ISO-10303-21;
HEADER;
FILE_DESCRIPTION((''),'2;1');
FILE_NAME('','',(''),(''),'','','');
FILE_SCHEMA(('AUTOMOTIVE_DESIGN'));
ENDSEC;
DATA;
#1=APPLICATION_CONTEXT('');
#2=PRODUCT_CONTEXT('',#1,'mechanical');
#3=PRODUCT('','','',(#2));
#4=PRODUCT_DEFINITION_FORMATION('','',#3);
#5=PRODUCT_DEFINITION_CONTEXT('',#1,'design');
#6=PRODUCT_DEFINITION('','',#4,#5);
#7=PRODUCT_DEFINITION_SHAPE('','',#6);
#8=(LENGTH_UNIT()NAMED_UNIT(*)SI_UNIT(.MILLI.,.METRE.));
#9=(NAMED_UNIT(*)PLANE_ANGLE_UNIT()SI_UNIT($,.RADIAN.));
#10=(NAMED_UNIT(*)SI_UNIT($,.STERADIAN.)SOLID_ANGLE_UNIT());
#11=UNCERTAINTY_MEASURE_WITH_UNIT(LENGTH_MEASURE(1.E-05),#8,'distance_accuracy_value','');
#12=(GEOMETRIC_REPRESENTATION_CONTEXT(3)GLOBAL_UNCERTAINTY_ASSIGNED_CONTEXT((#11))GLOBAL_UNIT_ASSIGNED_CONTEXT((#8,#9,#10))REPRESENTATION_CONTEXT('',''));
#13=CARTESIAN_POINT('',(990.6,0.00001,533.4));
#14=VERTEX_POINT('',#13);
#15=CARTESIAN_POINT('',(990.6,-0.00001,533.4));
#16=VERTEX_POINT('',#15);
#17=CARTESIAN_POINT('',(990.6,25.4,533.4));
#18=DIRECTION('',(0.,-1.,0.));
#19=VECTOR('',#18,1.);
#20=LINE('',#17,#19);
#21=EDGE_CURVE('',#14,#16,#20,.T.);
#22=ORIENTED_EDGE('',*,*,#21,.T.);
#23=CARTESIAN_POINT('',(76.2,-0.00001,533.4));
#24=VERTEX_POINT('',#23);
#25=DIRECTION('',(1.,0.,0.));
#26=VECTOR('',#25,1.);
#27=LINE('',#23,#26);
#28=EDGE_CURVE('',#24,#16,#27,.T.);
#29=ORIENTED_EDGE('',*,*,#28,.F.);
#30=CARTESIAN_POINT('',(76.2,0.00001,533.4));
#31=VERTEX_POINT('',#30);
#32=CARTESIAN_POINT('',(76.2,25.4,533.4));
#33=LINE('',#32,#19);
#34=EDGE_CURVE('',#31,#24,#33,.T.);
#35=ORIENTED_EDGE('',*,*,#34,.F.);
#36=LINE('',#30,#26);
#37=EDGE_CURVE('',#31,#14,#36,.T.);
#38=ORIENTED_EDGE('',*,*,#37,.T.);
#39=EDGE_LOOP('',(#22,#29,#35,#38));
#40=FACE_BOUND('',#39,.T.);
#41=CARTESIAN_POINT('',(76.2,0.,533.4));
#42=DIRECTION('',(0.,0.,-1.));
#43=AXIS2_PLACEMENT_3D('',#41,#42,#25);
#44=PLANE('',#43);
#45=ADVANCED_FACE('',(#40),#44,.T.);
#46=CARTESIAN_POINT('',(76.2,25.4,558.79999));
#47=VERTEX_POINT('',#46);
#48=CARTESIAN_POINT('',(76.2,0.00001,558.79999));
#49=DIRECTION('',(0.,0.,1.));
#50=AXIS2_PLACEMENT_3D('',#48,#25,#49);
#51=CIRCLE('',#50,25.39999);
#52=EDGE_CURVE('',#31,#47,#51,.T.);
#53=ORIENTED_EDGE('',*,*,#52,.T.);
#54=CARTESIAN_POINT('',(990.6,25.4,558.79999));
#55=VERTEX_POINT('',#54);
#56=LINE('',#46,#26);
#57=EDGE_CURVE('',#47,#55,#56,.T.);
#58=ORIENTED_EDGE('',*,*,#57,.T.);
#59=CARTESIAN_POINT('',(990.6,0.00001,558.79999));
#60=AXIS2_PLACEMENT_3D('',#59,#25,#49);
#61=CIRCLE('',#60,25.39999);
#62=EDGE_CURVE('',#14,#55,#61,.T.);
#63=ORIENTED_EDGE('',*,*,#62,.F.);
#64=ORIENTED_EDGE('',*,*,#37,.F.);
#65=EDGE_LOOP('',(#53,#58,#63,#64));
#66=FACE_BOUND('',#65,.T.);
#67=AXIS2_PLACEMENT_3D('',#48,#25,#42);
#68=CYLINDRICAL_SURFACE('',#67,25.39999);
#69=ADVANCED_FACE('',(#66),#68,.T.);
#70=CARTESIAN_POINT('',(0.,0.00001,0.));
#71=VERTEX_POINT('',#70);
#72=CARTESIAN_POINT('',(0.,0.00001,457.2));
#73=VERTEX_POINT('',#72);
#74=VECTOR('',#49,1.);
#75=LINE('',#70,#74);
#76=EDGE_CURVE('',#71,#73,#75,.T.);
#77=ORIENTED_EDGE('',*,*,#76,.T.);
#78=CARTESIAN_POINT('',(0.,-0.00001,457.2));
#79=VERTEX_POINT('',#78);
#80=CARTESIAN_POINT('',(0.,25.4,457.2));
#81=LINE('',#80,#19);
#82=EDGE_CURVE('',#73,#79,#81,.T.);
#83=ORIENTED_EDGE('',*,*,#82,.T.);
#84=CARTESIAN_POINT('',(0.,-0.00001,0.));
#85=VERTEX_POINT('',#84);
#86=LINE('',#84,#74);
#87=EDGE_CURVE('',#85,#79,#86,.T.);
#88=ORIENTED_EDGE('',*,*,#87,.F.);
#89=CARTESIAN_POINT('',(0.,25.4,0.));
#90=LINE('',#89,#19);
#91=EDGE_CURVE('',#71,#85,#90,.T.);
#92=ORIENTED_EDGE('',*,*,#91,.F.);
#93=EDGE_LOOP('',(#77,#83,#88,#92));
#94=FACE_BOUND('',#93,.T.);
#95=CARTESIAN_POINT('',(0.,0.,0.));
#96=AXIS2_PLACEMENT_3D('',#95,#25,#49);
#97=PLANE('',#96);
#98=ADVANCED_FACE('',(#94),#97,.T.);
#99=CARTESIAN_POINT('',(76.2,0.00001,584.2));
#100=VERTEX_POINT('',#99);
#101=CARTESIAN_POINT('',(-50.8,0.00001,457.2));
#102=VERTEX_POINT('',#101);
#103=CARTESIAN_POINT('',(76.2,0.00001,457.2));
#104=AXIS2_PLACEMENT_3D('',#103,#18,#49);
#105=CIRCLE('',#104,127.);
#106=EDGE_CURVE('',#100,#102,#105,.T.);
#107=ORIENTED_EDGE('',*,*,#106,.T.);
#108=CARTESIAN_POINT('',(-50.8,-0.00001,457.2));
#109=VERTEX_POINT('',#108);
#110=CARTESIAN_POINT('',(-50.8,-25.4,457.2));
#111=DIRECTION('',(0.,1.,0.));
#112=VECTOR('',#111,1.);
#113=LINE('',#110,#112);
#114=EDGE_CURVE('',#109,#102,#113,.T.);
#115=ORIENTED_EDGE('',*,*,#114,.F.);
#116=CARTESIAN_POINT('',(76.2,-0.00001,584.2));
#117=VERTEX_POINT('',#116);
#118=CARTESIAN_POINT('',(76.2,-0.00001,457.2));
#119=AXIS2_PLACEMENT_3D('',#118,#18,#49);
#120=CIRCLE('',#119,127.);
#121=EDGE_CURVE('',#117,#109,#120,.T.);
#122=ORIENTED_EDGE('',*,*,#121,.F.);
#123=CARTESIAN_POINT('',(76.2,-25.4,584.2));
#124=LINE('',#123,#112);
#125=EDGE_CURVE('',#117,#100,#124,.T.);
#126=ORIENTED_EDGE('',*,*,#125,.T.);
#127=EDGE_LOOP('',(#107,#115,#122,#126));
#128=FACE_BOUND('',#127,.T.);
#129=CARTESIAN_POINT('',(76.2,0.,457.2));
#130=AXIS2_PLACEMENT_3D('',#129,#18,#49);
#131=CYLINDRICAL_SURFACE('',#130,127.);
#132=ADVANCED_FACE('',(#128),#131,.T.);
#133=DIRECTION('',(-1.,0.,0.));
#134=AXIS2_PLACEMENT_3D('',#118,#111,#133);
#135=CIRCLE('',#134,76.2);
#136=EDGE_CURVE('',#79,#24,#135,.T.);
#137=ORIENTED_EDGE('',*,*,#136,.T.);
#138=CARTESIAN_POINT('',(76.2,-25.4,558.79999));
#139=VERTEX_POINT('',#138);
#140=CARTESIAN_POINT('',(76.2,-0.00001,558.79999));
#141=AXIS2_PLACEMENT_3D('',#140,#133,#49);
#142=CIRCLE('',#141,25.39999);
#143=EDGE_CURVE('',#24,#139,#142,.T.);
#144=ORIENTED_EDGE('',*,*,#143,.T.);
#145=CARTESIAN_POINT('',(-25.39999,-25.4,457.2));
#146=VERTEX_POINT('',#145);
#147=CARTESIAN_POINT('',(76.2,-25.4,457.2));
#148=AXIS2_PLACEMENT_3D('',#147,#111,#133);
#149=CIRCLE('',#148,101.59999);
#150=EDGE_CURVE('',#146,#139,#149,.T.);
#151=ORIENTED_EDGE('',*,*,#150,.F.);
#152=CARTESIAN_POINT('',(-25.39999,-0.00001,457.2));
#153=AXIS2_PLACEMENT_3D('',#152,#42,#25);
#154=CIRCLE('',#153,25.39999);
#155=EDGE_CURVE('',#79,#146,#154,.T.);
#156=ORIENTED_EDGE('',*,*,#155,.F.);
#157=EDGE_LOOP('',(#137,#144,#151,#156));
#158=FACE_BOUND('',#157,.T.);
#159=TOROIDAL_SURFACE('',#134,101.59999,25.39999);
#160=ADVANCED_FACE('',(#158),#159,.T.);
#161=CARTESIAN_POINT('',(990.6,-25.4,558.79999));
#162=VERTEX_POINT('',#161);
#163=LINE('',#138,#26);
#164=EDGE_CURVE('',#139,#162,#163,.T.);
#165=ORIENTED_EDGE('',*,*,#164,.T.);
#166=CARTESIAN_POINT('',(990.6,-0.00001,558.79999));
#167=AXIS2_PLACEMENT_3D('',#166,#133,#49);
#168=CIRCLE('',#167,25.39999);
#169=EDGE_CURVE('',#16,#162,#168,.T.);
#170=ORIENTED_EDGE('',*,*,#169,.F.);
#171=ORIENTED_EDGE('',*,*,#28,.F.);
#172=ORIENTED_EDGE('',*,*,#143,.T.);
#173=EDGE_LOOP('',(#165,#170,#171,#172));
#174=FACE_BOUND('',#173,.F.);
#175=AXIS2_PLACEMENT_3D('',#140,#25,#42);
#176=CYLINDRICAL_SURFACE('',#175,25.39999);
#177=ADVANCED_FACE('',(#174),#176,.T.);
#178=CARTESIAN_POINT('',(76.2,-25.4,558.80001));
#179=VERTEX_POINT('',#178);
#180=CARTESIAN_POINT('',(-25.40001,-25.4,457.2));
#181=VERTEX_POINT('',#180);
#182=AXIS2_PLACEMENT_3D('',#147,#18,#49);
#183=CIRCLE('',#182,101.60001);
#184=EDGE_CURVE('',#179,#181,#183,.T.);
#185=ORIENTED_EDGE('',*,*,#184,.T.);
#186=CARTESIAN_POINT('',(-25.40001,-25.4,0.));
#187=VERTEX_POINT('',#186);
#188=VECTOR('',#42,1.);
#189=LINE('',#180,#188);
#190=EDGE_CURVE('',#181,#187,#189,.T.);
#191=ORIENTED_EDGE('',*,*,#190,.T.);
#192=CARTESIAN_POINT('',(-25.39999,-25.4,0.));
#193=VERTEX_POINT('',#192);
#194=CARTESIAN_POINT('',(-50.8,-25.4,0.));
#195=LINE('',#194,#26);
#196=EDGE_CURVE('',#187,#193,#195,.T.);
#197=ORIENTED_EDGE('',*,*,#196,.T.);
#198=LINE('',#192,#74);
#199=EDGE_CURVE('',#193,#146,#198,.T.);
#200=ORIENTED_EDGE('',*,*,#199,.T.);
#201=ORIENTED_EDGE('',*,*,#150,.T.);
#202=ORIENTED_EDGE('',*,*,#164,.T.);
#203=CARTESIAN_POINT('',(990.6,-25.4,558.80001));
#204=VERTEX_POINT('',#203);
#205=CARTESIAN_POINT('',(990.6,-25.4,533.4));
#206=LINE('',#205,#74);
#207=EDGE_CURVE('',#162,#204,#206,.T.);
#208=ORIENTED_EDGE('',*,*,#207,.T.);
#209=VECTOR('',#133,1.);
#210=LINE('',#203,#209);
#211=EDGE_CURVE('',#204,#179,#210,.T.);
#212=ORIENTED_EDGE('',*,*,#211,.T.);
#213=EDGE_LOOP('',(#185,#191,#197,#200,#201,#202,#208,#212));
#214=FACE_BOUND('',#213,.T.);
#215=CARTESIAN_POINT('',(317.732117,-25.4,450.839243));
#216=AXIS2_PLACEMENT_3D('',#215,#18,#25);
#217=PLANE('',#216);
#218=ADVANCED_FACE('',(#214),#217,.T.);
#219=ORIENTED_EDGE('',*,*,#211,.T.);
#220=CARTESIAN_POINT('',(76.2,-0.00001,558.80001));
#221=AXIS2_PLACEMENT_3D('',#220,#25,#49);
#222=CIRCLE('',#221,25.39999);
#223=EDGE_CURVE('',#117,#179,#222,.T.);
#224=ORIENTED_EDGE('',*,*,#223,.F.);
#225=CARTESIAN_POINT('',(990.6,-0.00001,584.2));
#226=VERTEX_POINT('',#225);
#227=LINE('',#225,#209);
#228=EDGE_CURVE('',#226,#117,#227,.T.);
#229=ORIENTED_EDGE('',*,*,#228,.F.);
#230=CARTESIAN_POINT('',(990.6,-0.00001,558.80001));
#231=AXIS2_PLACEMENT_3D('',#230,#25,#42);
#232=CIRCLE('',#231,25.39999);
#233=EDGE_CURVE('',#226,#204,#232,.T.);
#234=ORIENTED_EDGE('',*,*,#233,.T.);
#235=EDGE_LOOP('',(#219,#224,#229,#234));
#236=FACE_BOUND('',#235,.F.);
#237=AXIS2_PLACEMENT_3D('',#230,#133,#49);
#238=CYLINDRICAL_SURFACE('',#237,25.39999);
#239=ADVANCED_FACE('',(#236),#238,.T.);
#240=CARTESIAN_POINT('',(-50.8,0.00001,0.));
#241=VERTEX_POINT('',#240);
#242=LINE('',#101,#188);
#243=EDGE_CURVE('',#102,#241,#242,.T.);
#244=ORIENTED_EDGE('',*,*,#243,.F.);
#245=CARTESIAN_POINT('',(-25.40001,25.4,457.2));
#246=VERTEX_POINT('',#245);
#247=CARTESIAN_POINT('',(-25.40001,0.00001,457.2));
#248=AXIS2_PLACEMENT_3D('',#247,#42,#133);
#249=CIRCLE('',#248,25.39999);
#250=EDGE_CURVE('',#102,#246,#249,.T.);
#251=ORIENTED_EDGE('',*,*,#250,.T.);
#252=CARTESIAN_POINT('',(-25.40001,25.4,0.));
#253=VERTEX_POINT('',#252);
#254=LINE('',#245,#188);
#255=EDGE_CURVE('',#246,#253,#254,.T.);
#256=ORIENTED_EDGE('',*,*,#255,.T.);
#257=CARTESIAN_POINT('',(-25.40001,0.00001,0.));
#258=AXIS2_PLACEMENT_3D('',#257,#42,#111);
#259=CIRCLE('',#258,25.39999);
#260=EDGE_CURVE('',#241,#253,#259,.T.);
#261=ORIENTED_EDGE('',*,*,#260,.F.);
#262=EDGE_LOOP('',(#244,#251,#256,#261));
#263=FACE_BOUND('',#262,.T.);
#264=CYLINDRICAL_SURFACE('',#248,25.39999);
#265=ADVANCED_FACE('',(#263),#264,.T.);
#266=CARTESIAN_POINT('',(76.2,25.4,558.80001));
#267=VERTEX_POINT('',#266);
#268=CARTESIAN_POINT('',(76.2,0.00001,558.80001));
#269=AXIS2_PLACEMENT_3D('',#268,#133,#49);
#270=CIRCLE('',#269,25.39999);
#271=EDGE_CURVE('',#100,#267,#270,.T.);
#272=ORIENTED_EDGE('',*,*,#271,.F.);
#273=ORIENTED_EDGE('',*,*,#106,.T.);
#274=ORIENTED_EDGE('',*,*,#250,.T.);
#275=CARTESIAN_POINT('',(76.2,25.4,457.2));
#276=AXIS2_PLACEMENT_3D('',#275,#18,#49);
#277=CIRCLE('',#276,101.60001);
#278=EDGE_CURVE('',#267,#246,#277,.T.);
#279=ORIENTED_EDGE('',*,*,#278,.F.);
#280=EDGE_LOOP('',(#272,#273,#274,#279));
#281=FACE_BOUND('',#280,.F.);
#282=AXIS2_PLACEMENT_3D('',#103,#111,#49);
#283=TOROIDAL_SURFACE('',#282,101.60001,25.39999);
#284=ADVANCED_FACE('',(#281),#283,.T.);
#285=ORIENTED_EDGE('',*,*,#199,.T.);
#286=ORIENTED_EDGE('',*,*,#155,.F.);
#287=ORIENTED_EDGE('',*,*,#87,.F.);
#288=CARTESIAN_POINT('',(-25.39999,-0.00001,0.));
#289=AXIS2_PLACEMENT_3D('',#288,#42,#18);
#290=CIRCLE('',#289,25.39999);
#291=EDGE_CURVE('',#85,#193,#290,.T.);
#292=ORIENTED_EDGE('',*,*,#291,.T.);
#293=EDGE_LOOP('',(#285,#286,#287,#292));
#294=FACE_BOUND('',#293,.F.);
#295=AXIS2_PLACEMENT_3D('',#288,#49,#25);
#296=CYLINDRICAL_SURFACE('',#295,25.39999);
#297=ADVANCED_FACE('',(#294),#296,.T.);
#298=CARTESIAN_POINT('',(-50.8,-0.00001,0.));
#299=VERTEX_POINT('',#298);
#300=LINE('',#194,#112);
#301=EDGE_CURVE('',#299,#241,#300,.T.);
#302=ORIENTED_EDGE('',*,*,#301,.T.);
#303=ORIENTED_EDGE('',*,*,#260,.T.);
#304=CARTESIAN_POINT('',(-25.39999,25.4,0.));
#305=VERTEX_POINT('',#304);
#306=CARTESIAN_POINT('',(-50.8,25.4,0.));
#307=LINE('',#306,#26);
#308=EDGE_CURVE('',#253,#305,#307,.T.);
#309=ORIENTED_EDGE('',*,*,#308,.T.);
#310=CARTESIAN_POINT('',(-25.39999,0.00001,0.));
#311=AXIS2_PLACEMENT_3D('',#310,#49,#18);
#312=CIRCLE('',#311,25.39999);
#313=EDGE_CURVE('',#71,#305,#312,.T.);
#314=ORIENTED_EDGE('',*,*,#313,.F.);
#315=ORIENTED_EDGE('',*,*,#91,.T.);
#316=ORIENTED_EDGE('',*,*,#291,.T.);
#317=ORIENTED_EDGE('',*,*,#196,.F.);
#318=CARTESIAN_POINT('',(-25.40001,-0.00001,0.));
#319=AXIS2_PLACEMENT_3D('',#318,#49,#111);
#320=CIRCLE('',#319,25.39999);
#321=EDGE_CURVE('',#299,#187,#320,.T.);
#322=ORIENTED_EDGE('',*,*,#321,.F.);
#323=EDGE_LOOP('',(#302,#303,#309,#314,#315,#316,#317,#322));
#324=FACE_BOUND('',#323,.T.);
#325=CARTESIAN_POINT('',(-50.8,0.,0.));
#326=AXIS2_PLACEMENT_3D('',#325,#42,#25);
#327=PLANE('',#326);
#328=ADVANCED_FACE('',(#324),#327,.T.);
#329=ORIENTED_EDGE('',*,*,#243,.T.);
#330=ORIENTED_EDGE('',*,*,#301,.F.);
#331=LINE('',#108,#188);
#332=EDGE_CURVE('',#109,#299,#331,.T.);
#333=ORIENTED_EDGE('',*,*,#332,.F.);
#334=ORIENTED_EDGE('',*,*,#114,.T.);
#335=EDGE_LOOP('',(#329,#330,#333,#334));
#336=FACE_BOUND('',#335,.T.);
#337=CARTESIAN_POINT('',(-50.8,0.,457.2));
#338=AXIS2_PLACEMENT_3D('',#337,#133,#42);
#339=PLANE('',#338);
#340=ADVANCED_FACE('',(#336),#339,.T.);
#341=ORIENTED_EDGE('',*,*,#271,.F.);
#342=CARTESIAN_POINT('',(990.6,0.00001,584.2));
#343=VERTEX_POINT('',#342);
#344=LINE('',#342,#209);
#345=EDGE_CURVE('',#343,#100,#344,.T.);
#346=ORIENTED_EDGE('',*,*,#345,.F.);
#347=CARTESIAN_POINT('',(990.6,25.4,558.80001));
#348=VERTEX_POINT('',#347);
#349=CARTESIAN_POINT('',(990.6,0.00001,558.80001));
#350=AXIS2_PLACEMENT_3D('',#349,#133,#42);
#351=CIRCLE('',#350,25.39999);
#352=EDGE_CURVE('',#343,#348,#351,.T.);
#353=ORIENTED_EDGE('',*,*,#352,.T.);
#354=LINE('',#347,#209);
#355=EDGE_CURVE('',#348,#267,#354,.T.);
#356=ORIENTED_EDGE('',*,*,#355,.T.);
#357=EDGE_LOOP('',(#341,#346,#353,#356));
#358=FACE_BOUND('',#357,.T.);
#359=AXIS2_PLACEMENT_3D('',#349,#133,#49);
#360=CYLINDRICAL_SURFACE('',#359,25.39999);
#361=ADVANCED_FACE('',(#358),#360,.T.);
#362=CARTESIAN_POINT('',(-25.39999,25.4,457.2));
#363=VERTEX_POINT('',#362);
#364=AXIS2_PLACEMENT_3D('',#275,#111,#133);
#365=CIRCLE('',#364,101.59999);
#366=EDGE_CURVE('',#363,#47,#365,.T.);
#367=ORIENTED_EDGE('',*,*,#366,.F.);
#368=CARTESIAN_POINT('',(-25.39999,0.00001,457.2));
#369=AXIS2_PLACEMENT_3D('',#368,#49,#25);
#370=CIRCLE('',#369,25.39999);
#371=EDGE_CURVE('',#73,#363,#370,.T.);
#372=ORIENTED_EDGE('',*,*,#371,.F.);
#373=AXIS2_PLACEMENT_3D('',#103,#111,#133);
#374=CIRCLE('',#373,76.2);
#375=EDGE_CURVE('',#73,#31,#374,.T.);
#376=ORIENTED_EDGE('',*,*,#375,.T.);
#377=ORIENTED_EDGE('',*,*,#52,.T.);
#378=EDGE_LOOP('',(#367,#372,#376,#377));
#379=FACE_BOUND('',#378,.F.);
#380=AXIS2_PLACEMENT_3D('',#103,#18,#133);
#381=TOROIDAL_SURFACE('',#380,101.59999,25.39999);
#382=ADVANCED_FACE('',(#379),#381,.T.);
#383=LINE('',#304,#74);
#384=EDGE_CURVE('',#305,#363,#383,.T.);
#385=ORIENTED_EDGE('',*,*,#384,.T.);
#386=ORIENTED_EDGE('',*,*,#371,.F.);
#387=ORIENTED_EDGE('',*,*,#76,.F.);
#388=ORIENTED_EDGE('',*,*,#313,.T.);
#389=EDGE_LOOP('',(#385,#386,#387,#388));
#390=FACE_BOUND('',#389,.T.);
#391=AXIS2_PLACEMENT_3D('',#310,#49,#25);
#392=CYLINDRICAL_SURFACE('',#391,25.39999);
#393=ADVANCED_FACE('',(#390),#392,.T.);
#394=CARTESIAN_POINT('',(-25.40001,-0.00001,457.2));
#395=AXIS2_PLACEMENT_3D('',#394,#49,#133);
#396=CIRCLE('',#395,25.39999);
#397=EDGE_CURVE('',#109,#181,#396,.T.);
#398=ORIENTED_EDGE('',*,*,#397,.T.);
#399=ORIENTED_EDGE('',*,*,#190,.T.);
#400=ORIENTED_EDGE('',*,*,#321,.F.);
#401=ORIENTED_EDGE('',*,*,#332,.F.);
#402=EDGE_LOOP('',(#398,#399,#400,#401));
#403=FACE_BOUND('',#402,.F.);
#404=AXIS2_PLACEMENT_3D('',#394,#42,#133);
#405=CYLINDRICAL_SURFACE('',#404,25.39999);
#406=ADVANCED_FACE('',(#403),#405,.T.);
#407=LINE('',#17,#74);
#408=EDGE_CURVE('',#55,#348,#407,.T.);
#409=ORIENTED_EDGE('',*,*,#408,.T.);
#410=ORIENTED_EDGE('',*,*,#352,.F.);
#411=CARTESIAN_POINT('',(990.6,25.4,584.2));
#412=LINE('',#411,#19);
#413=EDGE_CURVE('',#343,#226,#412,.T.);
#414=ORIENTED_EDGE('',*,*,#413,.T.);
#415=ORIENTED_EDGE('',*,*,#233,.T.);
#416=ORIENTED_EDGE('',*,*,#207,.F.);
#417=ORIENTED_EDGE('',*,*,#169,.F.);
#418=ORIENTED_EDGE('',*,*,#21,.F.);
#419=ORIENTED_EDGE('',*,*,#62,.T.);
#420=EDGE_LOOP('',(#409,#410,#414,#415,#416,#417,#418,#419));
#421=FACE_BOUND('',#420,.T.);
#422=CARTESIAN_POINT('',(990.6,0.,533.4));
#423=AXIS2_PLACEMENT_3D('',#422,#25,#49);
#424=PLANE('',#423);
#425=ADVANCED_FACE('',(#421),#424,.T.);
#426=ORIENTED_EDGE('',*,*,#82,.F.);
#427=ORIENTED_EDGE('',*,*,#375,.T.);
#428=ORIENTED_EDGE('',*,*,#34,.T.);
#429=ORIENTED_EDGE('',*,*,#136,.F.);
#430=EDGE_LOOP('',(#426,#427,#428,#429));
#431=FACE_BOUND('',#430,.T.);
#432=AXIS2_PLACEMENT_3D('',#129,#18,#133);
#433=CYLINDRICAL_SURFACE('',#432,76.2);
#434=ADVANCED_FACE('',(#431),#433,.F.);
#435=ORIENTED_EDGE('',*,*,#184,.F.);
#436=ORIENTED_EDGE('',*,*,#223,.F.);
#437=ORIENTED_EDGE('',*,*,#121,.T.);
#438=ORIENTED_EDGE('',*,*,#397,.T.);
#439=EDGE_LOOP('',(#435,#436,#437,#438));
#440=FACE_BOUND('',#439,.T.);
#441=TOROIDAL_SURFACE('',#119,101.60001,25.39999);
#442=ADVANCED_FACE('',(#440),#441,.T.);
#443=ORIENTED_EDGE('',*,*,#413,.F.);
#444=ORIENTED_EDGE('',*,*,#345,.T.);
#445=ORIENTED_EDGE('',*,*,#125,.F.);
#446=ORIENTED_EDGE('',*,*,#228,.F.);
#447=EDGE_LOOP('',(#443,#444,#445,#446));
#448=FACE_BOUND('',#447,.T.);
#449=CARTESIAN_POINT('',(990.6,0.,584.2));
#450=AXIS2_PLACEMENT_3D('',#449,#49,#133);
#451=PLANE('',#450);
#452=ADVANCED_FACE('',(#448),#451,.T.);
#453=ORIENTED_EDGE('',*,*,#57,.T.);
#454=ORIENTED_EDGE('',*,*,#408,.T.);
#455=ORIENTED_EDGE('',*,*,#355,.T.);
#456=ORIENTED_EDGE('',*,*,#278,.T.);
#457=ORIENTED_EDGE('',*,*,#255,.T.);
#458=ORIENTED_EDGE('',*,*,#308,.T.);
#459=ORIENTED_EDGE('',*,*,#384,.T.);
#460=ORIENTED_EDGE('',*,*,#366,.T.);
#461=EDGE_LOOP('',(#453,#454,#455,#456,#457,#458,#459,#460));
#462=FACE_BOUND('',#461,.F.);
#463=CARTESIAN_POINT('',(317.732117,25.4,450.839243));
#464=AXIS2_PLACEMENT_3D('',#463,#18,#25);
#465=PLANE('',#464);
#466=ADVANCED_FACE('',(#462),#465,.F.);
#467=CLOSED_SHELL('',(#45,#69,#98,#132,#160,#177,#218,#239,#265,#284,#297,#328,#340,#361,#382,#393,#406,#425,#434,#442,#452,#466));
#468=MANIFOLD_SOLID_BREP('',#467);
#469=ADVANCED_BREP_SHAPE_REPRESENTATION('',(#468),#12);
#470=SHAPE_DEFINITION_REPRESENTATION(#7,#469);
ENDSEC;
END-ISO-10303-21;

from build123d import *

# Parameters (mm, degrees)
F1_DEPTH = 25.4
F2_R     = 25.39999


# Not quite as in the source:
# - a fillet or chamfer is up to 0.001 mm smaller than in the source, because OpenCascade refuses the exact size


with BuildPart() as f1:
    # F0 (on Front) → F1 (new body, symmetric)
    with BuildSketch(Plane.XZ):
        with BuildLine():
            Line((-50.8, 0), (0, 0))
            Line((0, 0), (0, 457.2))
            ThreePointArc((0, 457.2), (22.3184632736, 511.0815367264), (76.2, 533.4))
            Line((76.2, 533.4), (990.6, 533.4))
            Line((990.6, 533.4), (990.6, 584.2))
            Line((990.6, 584.2), (76.2, 584.2))
            ThreePointArc((76.2, 584.2), (-13.6025612107, 547.0025612107), (-50.8, 457.2))
            Line((-50.8, 457.2), (-50.8, 0))
        make_face()
    extrude(amount=F1_DEPTH, both=True)

    # F2 (radius 25.4 in the source; OpenCascade refuses exactly that, so slightly less here)
    f2_edges = [f1.edges().sort_by_distance(p)[0] for p in [
        (533.4, 25.4, 584.2),
        (533.4, -25.4, 584.2),
        (533.4, 25.4, 533.4),
        (533.4, -25.4, 533.4),
        (-13.602561, -25.4, 547.002561),
        (-13.602561, 25.4, 547.002561),
        (22.318463, -25.4, 511.081537),
        (0, -25.4, 228.6),
        (-50.8, -25.4, 228.6),
        (0, 25.4, 228.6),
        (-50.8, 25.4, 228.6),
        (22.318463, 25.4, 511.081537),
    ]]
    fillet(f2_edges, radius=F2_R)


solid = f1.part
